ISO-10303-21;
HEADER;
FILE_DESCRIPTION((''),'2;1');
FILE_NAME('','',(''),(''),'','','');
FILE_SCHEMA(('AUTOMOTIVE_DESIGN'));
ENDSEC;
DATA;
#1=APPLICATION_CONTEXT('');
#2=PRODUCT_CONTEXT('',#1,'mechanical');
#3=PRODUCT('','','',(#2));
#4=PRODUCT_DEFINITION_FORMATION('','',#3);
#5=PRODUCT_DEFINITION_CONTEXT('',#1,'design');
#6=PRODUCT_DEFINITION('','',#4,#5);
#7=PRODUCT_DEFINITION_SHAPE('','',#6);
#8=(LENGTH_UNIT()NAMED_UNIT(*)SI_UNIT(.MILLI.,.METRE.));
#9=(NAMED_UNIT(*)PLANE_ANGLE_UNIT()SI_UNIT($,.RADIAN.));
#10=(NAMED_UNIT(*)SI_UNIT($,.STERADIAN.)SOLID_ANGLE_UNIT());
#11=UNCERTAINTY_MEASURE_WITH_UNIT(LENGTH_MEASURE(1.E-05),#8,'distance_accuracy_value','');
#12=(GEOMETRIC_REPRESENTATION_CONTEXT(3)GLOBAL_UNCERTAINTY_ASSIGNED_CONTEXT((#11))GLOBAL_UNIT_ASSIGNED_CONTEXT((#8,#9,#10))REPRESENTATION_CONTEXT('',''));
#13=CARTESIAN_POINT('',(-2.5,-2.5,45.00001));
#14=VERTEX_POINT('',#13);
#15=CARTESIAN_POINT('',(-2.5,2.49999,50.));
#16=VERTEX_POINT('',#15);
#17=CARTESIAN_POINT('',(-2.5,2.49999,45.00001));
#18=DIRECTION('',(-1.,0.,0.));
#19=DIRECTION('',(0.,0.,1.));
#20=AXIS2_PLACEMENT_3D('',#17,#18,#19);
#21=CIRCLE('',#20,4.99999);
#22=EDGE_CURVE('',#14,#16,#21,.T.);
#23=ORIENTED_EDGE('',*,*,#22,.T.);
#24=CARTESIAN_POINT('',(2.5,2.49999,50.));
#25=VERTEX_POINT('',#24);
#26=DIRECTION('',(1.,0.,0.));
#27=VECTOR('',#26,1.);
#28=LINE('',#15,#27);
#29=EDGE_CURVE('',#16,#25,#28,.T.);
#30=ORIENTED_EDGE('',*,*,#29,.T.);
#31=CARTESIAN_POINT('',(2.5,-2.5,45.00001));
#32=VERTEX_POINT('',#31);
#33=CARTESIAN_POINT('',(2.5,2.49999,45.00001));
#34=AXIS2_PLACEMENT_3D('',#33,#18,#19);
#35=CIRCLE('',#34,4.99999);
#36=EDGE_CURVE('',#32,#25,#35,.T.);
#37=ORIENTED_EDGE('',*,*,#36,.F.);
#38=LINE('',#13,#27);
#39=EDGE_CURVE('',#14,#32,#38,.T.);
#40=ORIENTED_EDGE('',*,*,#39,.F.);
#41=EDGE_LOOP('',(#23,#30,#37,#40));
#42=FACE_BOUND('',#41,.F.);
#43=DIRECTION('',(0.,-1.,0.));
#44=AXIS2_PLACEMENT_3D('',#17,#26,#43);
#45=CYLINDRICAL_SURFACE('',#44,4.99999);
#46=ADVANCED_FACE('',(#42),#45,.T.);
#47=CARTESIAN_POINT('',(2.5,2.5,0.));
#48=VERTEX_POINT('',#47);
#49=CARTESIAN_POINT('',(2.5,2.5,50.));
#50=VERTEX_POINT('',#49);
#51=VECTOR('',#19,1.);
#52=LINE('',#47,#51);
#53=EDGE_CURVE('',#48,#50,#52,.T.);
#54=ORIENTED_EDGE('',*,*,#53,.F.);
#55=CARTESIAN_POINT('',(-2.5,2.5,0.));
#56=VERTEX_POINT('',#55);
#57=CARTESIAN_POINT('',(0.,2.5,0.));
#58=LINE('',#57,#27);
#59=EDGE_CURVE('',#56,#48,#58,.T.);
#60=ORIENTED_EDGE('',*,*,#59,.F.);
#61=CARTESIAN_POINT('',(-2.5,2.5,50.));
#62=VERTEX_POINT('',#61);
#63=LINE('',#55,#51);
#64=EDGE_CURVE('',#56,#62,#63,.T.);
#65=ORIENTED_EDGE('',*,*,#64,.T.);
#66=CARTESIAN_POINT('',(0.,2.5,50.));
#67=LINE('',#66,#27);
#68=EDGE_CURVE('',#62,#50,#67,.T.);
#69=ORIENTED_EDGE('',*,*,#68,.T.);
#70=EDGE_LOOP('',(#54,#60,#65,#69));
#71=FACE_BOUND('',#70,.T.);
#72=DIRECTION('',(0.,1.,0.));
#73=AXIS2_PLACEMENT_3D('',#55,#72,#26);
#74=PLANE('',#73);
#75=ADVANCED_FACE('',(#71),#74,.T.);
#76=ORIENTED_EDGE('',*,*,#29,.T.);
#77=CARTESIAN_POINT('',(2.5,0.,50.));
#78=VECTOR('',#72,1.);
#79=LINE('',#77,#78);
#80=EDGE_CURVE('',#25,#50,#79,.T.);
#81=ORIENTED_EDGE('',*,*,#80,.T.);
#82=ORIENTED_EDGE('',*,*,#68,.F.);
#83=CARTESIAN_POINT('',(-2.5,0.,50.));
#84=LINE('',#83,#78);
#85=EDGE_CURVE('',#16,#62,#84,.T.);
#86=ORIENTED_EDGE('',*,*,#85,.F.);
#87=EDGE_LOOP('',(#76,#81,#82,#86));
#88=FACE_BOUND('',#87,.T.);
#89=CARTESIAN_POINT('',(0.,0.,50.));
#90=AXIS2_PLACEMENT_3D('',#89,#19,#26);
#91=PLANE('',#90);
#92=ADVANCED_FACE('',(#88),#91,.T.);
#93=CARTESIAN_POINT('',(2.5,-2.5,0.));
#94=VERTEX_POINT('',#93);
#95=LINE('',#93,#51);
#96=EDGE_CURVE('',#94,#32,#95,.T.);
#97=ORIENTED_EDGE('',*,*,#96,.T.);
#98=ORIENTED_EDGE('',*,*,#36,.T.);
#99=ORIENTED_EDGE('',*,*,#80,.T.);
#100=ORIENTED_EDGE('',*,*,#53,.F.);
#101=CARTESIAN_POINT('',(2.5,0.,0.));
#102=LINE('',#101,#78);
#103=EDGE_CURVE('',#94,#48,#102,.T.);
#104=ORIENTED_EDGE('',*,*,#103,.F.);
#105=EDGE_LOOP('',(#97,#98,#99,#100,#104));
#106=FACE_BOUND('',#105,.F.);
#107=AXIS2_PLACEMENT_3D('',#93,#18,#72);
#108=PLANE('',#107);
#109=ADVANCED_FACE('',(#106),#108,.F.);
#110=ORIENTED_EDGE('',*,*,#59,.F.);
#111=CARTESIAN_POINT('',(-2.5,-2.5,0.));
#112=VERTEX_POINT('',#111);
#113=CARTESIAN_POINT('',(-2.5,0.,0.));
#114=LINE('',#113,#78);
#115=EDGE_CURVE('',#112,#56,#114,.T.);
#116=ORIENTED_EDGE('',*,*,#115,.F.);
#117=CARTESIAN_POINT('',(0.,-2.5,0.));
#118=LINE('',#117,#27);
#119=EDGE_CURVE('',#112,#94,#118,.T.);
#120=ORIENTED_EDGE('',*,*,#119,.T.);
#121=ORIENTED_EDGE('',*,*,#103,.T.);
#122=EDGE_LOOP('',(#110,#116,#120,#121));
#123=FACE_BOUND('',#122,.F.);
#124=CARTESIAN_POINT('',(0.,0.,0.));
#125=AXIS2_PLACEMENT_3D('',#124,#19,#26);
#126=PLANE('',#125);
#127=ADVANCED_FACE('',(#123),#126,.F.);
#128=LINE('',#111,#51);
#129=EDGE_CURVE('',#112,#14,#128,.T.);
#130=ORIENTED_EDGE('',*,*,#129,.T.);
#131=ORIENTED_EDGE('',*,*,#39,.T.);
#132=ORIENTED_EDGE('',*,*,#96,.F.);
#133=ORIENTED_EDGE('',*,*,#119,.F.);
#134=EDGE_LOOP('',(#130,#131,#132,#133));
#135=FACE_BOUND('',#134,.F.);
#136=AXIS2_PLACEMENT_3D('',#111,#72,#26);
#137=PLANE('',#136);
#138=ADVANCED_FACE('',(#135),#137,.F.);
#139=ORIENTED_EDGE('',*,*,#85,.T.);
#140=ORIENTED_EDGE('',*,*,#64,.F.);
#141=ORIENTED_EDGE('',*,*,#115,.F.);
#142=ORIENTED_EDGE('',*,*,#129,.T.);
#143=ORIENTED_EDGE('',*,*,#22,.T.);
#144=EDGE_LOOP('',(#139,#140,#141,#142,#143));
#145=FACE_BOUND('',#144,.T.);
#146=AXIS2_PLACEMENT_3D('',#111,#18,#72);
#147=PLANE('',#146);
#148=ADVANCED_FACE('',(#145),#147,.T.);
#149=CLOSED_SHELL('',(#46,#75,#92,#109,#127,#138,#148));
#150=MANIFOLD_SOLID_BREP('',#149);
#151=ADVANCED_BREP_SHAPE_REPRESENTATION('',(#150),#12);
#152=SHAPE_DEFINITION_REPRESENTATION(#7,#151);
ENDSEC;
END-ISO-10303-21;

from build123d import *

# Parameters (mm, degrees)
F0_W     = 5
F0_H     = 5
F1_DEPTH = 50
F2_R     = 4.99999


# Not quite as in the source:
# - a fillet or chamfer is up to 0.001 mm smaller than in the source, because OpenCascade refuses the exact size


with BuildPart() as f1:
    # F0 (on Top) → F1 (new body)
    with BuildSketch(Plane.XY):
        Rectangle(F0_W, F0_H)
    extrude(amount=F1_DEPTH)

    # F2 (radius 5 in the source; OpenCascade refuses exactly that, so slightly less here)
    f2_edges = [f1.edges().sort_by_distance(p)[0] for p in [
        (0, -2.5, 50),
    ]]
    fillet(f2_edges, radius=F2_R)


solid = f1.part
